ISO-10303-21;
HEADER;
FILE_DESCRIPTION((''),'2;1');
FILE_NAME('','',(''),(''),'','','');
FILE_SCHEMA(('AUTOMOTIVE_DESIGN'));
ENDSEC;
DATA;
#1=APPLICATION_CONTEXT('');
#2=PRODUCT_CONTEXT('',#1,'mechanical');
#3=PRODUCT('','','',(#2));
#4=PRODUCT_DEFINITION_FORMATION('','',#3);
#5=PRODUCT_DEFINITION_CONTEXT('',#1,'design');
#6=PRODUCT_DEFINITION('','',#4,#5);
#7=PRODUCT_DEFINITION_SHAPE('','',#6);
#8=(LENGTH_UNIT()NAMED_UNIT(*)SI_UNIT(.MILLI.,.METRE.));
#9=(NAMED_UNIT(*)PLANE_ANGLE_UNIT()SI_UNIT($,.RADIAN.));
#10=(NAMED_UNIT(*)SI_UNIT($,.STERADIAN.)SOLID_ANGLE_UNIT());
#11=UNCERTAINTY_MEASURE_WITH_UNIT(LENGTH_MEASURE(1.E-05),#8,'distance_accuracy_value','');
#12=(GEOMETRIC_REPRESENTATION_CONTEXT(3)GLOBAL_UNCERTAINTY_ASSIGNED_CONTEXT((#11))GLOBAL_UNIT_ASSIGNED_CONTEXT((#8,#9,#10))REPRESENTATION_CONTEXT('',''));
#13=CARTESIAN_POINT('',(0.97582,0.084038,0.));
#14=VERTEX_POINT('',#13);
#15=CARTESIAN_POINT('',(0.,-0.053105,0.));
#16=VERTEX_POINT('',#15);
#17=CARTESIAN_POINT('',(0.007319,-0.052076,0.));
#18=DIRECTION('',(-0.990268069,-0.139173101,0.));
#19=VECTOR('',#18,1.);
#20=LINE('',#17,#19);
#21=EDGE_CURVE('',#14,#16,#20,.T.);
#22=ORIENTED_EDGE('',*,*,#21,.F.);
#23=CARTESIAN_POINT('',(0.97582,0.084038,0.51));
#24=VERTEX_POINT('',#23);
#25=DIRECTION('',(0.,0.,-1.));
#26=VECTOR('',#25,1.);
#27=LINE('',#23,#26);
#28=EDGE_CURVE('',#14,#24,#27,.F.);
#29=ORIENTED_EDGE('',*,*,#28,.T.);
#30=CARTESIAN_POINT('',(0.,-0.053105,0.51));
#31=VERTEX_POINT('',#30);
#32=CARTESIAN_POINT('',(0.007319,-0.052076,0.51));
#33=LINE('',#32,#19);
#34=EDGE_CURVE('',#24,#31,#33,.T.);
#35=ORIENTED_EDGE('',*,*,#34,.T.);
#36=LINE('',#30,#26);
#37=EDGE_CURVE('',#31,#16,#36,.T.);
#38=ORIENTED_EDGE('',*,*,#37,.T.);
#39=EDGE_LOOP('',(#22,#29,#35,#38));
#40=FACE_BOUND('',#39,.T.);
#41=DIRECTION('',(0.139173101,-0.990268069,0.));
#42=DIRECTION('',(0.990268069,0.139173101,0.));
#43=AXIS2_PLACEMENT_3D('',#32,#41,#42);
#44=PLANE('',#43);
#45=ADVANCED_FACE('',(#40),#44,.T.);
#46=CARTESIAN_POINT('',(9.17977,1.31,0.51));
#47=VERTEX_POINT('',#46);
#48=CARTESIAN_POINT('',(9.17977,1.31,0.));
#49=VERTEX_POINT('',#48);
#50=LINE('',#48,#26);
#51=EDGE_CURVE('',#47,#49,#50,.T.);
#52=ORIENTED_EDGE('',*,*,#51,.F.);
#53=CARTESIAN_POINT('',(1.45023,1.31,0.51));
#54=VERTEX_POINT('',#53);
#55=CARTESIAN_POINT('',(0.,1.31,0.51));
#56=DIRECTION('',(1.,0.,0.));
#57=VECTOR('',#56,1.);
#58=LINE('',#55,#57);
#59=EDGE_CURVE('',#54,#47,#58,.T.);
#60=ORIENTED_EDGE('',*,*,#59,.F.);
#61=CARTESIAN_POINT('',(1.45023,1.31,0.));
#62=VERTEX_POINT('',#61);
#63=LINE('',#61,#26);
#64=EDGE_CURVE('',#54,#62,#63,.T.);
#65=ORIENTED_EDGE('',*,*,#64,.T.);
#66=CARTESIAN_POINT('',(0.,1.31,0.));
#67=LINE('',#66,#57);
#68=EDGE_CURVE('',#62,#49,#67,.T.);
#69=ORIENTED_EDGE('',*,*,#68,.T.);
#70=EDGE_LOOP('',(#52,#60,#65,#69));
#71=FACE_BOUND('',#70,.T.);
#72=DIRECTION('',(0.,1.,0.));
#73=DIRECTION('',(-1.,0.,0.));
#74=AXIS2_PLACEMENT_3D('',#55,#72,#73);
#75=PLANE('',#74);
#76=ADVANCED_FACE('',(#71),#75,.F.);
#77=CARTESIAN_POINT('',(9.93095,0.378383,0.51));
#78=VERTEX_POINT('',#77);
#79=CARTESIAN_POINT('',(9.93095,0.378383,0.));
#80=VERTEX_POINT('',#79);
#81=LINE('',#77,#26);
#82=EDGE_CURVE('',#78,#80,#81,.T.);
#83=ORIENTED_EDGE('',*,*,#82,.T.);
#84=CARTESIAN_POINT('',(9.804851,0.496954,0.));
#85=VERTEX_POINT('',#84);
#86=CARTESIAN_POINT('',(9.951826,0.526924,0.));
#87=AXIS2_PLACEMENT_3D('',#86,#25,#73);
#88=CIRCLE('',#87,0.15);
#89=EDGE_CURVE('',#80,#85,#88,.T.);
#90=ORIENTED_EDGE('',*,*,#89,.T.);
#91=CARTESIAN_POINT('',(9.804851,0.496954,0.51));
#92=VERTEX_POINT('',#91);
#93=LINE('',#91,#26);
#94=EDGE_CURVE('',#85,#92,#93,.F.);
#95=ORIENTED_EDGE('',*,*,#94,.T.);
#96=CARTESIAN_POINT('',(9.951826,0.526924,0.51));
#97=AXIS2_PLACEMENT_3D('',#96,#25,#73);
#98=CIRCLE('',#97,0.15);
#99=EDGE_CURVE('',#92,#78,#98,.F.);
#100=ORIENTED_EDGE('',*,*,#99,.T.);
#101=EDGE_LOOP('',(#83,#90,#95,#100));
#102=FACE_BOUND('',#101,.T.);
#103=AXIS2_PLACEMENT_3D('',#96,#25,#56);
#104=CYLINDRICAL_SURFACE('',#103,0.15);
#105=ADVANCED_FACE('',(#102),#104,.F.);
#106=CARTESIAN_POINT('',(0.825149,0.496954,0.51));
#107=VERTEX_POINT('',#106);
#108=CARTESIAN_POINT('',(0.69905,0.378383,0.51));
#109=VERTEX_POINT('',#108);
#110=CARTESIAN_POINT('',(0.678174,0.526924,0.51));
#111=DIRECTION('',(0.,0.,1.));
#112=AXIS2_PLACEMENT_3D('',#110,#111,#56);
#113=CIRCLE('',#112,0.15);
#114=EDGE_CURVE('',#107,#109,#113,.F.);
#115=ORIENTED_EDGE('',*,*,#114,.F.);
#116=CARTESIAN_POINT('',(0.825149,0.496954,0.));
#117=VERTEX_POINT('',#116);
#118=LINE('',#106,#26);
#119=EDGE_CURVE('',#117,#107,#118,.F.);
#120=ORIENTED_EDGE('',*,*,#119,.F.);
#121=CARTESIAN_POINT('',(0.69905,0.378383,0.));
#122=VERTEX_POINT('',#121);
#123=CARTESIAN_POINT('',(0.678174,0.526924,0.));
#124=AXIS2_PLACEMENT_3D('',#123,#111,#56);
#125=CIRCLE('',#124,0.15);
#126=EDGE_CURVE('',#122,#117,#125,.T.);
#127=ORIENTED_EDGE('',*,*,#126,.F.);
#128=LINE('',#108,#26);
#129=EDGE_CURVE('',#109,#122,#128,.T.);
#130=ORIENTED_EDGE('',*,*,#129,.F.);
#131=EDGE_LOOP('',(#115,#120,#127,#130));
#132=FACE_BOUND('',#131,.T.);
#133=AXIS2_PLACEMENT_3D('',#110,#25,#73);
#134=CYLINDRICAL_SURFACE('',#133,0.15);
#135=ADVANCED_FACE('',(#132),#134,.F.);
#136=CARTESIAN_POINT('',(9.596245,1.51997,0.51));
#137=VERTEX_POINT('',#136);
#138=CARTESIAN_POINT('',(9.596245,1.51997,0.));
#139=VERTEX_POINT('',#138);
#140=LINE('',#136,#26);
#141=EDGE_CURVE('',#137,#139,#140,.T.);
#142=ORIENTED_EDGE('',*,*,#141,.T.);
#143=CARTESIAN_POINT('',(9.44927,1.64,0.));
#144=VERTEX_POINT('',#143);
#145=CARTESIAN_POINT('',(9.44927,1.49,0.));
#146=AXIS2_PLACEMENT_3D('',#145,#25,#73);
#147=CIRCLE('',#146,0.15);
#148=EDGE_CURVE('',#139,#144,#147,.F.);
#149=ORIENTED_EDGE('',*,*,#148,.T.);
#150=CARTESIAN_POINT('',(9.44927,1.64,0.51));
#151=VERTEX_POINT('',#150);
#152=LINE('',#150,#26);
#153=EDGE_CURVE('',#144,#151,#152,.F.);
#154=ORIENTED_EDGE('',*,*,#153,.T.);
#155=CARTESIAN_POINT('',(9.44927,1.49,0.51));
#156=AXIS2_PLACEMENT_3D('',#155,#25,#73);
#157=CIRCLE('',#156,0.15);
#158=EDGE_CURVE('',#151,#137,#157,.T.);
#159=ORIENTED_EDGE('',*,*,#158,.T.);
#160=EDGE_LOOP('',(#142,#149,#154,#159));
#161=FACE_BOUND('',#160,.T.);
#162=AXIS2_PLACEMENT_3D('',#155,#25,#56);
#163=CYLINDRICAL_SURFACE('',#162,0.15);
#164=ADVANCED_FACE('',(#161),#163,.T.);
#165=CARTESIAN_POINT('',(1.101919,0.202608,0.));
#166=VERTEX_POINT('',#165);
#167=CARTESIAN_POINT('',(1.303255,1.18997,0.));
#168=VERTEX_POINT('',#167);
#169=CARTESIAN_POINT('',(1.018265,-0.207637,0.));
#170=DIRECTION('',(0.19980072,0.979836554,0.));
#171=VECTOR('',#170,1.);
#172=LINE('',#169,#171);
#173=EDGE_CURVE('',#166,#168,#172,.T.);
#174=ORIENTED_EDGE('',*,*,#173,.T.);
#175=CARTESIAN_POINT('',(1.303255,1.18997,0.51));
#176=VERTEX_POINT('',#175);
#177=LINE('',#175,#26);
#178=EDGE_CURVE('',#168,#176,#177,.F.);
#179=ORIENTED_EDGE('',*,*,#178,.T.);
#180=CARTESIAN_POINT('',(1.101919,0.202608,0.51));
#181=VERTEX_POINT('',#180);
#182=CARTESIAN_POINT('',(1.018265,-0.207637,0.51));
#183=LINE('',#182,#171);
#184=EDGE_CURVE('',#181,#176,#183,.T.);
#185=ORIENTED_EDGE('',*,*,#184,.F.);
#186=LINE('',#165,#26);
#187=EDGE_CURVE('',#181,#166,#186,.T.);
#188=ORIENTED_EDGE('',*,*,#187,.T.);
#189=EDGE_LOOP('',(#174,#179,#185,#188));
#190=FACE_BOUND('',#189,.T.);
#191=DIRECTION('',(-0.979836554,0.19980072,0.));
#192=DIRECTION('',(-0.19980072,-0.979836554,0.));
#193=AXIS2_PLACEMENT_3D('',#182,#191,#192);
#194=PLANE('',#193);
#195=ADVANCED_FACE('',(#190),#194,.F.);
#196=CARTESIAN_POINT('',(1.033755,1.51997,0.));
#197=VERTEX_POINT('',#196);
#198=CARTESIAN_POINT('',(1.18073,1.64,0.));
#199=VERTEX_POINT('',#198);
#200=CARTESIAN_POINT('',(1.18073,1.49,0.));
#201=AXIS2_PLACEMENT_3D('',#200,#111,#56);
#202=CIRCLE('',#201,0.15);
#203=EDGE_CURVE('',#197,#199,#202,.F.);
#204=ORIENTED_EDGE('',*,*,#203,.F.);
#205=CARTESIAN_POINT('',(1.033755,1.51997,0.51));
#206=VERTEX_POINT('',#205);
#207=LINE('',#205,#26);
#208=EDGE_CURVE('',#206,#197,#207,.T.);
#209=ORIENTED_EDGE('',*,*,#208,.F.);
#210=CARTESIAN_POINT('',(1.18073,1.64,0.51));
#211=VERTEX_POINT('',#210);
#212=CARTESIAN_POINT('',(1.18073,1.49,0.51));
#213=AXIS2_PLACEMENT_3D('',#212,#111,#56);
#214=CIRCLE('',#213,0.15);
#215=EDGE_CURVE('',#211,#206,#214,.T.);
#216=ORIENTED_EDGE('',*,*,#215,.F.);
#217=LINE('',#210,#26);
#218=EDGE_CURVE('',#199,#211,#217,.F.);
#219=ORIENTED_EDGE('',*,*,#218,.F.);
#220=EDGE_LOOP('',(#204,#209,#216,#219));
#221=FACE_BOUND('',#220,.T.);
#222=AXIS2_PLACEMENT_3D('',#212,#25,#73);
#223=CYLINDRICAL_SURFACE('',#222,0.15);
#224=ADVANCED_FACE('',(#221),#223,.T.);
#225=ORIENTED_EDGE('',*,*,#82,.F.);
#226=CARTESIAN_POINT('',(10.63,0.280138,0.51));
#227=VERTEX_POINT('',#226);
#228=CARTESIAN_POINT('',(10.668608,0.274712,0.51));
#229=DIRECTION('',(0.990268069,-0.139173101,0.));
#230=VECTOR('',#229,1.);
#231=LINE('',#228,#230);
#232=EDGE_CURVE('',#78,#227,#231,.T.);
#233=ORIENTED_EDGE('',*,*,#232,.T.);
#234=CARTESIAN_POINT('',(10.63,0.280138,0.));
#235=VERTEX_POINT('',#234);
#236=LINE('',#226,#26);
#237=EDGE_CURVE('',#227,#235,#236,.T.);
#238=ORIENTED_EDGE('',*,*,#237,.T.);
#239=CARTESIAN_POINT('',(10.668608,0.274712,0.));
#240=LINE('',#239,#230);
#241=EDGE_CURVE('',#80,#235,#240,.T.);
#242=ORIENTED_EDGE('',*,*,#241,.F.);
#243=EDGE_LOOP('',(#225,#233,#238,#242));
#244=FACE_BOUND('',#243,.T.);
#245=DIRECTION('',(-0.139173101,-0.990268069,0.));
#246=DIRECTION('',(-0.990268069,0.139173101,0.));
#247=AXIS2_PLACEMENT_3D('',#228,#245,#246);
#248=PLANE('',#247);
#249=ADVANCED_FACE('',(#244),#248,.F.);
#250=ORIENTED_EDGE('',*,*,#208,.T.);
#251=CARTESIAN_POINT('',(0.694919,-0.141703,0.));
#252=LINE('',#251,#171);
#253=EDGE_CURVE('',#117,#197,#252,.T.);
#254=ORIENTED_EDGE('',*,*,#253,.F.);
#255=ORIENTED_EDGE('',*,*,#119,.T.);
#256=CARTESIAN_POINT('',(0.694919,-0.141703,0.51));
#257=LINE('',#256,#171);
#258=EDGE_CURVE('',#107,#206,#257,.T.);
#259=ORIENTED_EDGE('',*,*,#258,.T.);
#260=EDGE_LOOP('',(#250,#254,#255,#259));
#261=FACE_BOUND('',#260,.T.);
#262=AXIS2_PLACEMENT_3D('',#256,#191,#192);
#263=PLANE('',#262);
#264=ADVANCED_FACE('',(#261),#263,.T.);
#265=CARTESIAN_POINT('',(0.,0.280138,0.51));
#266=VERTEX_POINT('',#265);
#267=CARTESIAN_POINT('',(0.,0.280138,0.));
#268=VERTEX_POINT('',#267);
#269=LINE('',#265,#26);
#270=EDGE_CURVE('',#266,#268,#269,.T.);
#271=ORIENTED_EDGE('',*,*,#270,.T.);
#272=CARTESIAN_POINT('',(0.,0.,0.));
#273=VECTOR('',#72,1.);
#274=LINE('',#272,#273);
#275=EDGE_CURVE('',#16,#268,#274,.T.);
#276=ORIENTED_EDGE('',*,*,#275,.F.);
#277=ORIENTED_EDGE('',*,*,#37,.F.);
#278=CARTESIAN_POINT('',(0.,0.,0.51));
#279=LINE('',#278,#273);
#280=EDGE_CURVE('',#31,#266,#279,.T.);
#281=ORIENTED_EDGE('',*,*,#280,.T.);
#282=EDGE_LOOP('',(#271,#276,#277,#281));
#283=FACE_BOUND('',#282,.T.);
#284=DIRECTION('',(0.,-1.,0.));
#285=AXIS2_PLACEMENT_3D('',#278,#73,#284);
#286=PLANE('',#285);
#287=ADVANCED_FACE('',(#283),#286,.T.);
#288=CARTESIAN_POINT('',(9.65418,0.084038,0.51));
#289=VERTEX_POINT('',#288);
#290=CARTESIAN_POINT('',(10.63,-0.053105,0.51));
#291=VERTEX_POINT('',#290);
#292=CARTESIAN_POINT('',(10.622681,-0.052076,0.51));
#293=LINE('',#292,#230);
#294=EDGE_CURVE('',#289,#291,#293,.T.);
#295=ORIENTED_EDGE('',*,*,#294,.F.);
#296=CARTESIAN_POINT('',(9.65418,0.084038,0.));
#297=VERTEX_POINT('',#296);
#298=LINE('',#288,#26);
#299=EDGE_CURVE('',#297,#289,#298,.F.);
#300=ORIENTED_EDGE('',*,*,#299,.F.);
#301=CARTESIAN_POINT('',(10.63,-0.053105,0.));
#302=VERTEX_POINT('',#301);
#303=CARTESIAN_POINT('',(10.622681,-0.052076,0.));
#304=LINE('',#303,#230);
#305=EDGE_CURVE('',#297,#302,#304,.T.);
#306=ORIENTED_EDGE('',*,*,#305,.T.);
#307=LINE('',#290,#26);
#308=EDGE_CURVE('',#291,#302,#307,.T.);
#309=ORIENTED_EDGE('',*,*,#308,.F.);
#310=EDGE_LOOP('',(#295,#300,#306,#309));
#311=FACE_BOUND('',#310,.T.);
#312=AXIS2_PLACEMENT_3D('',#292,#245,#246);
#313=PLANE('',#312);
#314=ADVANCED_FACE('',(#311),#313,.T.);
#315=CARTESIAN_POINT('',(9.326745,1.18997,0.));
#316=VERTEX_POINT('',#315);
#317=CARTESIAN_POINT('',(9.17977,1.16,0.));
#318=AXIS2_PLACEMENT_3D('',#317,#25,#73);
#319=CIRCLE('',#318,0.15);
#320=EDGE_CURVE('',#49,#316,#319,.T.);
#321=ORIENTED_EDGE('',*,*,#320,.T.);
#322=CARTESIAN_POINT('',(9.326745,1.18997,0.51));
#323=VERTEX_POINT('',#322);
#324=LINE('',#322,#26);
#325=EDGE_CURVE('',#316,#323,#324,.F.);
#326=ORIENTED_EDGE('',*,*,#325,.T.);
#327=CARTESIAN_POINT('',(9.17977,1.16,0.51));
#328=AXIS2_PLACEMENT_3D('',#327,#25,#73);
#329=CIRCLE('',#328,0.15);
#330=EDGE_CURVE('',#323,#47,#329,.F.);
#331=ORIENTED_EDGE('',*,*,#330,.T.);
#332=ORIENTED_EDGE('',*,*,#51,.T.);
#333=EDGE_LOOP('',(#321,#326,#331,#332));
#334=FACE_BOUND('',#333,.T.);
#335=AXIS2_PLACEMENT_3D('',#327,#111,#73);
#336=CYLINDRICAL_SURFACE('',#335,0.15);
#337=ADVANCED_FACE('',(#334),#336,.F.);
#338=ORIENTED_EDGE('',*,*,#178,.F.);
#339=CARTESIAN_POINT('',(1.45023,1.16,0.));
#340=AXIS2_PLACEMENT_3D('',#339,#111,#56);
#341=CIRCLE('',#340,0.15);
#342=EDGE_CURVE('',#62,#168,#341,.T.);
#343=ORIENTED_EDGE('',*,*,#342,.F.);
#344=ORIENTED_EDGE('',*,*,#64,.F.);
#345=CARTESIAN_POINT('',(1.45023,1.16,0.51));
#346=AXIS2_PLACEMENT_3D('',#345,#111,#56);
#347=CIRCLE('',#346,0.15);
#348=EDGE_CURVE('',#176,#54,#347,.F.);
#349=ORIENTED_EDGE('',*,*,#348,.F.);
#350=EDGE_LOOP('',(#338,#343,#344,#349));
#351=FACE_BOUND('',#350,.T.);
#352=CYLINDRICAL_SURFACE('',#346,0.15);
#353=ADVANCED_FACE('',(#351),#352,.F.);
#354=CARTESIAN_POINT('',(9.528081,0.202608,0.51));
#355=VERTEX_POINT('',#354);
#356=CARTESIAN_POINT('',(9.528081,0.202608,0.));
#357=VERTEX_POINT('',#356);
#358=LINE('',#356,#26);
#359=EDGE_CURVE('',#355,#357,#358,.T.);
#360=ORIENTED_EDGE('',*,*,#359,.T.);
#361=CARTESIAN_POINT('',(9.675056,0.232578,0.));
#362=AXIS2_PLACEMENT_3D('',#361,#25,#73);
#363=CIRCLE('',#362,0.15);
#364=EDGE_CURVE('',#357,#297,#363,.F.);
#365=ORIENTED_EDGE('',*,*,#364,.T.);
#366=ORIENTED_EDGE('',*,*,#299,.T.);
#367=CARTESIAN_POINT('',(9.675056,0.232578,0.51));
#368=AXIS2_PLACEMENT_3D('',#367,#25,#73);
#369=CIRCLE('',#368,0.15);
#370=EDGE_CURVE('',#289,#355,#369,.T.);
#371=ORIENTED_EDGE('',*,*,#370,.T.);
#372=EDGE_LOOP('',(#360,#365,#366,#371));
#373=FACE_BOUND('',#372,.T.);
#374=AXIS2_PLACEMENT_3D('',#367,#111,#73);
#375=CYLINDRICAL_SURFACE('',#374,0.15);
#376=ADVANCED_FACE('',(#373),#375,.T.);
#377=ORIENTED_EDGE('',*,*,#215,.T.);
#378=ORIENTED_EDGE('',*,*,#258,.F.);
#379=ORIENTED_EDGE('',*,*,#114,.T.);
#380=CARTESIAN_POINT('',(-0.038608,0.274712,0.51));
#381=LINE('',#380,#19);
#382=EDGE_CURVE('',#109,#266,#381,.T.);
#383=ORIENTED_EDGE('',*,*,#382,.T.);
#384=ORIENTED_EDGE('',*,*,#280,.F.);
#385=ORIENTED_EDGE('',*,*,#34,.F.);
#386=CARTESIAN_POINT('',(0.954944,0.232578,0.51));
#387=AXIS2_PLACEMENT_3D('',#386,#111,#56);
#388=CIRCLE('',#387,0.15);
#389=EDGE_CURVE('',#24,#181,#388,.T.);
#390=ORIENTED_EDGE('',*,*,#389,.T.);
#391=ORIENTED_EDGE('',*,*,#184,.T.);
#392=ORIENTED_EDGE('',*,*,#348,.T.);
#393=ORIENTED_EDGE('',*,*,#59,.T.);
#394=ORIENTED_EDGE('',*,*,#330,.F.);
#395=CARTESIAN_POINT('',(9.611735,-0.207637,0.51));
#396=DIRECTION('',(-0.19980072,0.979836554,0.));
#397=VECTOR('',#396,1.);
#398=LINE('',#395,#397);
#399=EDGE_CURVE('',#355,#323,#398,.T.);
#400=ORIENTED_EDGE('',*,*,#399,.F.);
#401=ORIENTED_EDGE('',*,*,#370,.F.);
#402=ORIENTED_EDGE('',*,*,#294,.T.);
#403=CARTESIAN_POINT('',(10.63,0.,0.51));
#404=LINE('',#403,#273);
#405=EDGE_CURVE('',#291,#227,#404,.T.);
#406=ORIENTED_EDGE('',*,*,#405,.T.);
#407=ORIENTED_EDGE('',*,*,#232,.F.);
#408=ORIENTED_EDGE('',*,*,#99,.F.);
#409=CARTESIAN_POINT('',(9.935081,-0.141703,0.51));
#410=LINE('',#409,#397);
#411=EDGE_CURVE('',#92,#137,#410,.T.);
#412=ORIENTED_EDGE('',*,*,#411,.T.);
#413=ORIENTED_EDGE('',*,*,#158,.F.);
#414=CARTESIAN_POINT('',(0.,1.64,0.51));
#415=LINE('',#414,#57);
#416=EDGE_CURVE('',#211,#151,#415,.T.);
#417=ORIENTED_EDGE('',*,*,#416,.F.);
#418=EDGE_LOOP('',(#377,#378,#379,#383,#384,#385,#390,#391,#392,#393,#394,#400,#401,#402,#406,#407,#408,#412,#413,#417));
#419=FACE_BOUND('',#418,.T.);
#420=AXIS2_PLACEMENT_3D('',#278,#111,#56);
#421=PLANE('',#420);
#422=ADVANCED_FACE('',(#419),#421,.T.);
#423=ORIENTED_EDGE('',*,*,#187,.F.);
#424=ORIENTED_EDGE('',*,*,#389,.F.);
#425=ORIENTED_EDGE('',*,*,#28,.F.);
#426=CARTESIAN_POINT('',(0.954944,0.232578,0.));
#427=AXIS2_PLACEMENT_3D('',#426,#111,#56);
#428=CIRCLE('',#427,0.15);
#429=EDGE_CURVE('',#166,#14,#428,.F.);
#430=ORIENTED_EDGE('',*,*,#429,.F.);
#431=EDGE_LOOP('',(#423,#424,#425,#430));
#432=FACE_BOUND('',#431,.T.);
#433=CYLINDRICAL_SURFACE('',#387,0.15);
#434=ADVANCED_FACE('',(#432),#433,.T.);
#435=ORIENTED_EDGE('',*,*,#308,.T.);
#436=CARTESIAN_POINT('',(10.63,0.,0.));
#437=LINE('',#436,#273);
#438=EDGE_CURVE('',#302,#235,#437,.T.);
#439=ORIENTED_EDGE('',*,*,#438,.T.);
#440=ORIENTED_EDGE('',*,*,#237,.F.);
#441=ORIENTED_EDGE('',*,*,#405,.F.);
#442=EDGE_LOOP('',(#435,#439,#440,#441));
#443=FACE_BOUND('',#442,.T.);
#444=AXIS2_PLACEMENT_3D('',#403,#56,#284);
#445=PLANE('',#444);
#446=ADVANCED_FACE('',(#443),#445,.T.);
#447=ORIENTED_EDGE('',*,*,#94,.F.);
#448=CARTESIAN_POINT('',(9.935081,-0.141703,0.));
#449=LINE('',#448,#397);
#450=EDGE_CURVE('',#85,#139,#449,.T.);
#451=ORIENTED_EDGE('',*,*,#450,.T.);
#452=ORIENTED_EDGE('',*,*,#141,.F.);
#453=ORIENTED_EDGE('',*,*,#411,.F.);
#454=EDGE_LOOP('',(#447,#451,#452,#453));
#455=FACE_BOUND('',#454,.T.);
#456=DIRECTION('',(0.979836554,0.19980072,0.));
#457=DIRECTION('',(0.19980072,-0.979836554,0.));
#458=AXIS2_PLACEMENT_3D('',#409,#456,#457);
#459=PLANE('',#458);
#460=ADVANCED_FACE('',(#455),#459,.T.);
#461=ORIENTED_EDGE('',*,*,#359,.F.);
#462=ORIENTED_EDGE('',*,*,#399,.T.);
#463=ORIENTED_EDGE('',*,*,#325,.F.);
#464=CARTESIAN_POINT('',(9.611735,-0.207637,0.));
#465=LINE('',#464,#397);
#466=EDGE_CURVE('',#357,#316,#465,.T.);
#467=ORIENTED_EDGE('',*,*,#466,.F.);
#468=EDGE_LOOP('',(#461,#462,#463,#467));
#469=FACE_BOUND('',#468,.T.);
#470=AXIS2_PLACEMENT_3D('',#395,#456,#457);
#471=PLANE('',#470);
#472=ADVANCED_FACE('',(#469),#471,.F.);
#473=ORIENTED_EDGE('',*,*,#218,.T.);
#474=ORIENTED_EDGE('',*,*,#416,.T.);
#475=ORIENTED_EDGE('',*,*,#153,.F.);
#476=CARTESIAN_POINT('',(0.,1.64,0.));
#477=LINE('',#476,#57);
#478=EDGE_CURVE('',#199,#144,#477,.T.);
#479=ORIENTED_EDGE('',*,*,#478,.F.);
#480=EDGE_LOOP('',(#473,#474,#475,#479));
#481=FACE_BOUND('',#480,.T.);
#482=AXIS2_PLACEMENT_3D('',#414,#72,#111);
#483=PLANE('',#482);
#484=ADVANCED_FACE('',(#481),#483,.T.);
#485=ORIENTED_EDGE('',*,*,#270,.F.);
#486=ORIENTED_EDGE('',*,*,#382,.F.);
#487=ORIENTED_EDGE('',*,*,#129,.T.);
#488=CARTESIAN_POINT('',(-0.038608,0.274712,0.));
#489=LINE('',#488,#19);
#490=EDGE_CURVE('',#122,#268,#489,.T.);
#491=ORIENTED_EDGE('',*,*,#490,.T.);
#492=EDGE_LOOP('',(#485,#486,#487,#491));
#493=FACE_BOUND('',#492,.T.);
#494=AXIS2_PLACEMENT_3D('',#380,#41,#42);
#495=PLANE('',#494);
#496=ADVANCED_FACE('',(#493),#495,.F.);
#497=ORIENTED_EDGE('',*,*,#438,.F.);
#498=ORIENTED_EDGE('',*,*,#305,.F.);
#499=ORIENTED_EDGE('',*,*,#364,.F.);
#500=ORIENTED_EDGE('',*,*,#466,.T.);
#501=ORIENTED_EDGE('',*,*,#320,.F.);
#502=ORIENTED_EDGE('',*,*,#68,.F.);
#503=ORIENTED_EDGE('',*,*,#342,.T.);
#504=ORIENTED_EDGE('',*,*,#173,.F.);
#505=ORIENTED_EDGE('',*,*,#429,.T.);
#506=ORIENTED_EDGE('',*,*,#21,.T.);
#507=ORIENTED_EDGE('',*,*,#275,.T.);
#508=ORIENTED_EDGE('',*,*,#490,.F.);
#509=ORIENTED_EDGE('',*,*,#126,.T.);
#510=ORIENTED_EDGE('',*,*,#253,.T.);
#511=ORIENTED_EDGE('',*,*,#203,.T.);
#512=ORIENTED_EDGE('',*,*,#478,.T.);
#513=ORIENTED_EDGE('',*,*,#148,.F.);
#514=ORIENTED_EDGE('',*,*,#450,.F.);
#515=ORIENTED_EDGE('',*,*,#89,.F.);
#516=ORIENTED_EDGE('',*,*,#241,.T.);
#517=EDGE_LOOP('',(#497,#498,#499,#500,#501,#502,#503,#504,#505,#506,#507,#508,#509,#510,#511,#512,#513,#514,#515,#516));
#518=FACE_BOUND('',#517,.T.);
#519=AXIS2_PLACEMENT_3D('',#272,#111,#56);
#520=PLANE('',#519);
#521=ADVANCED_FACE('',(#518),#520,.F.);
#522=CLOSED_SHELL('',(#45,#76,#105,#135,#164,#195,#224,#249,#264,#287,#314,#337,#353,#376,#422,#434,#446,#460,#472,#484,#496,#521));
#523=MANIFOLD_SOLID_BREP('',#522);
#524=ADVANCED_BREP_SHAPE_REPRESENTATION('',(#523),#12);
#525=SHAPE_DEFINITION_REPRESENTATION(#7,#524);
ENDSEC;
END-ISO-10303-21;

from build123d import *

# Parameters (mm, degrees)
BOSS_EXTRUDE1_DEPTH  = 0.51
FILLET2_R            = 0.15
SKETCH3_W            = 0.51
SKETCH3_H            = 0.33
BOSS_EXTRUDE2_DEPTH  = 3.8
FILLET2_OF_MIRROR2_R = 0.15


with BuildPart() as part:
    # Sketch2 → Boss-Extrude1 (new body)
    with BuildSketch(Plane.XY):
        Polygon((0, 0.280138432), (0, 0), (0, -0.053104667), (1.080748407, 0.098784616), (1.148133843, 0.429247456), (1.327730115, 1.31), (1.515, 1.31), (1.515, 1.64), (1.058230308, 1.64), (0.803978227, 0.393130203), align=None)
    boss_extrude1 = extrude(amount=BOSS_EXTRUDE1_DEPTH)

    # Fillet2
    fillet2_edges = [part.edges().sort_by_distance(p)[0] for p in [
        (1.058230308, 1.64, 0.255),
        (1.327730115, 1.31, 0.255),
        (1.080748407, 0.098784616, 0.255),
        (0.803978227, 0.393130203, 0.255),
    ]]
    fillet(fillet2_edges, radius=FILLET2_R)

    # Sketch3 → Boss-Extrude2 (add)
    with BuildSketch(Plane(origin=(1.515, 0, 0), x_dir=(0, 0, -1), z_dir=(1, 0, 0))):
        with Locations((-0.255, 1.475)):
            Rectangle(SKETCH3_W, SKETCH3_H)
    boss_extrude2 = extrude(amount=BOSS_EXTRUDE2_DEPTH)

    # Mirror2: Boss-Extrude1, Boss-Extrude2 across plane
    add(boss_extrude1.mirror(Plane(origin=(5.315, 0, 0), x_dir=(0, 0, 1), z_dir=(1, 0, 0))))
    add(boss_extrude2.mirror(Plane(origin=(5.315, 0, 0), x_dir=(0, 0, 1), z_dir=(1, 0, 0))))

    # Fillet2 of Mirror2
    fillet2_of_mirror2_edges = [part.edges().sort_by_distance(p)[0] for p in [
        (9.571769692, 1.64, 0.255),
        (9.302269885, 1.31, 0.255),
        (9.549251593, 0.098784616, 0.255),
        (9.826021773, 0.393130203, 0.255),
    ]]
    fillet(fillet2_of_mirror2_edges, radius=FILLET2_OF_MIRROR2_R)


solid = part.part
